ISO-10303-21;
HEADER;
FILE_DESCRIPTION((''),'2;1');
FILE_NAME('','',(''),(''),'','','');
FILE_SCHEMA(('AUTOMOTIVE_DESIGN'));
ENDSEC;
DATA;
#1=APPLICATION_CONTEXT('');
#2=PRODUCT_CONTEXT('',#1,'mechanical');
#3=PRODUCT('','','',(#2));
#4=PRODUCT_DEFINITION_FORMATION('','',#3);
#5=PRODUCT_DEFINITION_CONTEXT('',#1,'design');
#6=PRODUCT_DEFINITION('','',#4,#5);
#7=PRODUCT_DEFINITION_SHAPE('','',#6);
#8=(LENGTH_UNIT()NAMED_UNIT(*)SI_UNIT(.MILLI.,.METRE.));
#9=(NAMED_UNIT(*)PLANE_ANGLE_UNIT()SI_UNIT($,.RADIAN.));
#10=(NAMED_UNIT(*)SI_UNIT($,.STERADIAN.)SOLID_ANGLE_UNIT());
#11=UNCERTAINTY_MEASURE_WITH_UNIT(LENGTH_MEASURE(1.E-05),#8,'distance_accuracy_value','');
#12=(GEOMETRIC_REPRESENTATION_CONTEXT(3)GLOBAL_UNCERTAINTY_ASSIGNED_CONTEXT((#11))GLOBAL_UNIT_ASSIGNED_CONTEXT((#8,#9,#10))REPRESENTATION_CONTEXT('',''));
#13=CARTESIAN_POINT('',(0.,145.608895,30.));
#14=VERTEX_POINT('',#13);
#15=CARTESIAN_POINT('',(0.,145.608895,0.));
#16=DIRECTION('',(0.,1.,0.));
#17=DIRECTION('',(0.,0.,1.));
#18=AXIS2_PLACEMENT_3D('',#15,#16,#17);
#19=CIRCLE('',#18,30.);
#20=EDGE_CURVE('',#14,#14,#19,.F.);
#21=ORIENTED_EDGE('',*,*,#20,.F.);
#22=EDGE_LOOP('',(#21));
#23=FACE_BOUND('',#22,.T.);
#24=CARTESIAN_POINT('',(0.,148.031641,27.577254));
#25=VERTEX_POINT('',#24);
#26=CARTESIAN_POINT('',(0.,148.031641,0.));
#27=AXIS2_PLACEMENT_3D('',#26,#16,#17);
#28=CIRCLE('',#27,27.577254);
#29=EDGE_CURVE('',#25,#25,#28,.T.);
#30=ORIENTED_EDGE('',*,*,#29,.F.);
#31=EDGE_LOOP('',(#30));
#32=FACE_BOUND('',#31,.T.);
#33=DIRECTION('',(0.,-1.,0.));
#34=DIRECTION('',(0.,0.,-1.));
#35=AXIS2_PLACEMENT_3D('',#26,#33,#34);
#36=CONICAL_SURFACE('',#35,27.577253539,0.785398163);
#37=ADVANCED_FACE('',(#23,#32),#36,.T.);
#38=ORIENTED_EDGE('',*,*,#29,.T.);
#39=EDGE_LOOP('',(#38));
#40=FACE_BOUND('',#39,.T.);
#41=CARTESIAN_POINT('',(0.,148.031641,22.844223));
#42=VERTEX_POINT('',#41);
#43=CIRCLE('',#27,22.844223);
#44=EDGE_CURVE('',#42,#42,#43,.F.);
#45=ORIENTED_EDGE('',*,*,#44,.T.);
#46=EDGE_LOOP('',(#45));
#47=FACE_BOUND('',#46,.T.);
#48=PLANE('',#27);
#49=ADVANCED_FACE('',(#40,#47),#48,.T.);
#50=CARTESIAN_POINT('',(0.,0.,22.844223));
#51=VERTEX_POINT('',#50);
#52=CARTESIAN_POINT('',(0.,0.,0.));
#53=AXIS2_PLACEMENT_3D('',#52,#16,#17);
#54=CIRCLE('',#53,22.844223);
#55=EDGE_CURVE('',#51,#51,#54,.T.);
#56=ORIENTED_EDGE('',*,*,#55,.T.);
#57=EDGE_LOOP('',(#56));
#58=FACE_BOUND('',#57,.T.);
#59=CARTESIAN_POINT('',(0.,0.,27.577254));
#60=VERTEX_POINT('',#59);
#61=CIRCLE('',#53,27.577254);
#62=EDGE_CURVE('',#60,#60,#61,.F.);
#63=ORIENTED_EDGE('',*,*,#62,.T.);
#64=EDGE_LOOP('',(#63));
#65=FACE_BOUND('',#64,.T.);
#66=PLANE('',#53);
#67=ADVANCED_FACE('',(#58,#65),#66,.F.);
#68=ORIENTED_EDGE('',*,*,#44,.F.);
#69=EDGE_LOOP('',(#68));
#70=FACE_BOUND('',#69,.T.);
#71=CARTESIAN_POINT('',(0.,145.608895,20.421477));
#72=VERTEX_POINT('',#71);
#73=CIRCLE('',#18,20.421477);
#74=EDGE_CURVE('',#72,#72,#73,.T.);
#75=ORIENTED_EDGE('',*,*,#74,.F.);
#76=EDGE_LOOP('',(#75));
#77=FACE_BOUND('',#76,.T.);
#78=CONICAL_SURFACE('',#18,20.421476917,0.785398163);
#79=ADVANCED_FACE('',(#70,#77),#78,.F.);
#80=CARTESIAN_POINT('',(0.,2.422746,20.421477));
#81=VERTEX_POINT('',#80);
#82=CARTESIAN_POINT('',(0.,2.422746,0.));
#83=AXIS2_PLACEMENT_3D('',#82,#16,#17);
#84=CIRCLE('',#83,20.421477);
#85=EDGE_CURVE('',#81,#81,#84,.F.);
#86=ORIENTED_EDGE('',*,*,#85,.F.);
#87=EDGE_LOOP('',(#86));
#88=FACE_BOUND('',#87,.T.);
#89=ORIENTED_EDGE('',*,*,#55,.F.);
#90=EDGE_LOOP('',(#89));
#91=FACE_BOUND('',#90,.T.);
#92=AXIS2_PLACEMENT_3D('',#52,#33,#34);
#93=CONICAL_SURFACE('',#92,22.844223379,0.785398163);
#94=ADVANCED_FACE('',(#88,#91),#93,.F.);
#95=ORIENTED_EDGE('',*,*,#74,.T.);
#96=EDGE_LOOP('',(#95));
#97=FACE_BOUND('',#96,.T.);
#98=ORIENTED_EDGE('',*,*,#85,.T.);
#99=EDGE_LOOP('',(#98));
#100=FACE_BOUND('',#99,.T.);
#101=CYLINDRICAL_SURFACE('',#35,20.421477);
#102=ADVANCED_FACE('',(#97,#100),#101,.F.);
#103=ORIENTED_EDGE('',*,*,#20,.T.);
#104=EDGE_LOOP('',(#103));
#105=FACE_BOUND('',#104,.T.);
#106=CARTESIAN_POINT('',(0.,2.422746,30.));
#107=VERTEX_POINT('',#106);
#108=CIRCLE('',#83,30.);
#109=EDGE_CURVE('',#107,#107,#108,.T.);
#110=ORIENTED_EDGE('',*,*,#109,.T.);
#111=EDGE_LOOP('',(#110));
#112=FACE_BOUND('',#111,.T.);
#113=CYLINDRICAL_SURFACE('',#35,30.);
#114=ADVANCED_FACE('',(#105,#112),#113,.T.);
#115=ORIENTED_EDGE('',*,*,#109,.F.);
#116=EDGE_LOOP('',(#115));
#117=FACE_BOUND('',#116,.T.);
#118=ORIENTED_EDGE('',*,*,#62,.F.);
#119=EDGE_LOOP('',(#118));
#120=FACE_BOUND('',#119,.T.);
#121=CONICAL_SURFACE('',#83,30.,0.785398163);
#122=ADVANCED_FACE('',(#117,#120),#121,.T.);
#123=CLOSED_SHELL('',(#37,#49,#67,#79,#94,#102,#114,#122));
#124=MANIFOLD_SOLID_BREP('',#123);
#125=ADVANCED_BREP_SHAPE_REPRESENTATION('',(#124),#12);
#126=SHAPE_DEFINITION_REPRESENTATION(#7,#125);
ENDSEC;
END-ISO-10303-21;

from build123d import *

# Parameters (mm, degrees)
SKETCH1_R           = 30
BOSS_EXTRUDE1_DEPTH = 148.031641057
SKETCH2_R           = 20.421476917
CUT_EXTRUDE1_DEPTH  = 154.991450263
CHAMFER1_SIZE       = 2.422746461


with BuildPart() as part:
    # Sketch1 → Boss-Extrude1 (new body)
    with BuildSketch(Plane(origin=(0, 0, 0), x_dir=(1, 0, 0), z_dir=(0, 1, 0))):
        Circle(SKETCH1_R)
    extrude(amount=BOSS_EXTRUDE1_DEPTH)

    # Sketch2 → Cut-Extrude1 (cut, through all)
    with BuildSketch(Plane(origin=(0, 0, 0), x_dir=(1, 0, 0), z_dir=(0, 1, 0))):
        Circle(SKETCH2_R)
    extrude(amount=CUT_EXTRUDE1_DEPTH, mode=Mode.SUBTRACT)

    # Chamfer1
    chamfer1_edges = [part.edges().sort_by_distance(p)[0] for p in [
        (-20.421476917, 148.031641057, 0),
        (-20.421476917, 0, 0),
        (-30, 0, 0),
        (-30, 148.031641057, 0),
    ]]
    chamfer(chamfer1_edges, length=CHAMFER1_SIZE)


solid = part.part
